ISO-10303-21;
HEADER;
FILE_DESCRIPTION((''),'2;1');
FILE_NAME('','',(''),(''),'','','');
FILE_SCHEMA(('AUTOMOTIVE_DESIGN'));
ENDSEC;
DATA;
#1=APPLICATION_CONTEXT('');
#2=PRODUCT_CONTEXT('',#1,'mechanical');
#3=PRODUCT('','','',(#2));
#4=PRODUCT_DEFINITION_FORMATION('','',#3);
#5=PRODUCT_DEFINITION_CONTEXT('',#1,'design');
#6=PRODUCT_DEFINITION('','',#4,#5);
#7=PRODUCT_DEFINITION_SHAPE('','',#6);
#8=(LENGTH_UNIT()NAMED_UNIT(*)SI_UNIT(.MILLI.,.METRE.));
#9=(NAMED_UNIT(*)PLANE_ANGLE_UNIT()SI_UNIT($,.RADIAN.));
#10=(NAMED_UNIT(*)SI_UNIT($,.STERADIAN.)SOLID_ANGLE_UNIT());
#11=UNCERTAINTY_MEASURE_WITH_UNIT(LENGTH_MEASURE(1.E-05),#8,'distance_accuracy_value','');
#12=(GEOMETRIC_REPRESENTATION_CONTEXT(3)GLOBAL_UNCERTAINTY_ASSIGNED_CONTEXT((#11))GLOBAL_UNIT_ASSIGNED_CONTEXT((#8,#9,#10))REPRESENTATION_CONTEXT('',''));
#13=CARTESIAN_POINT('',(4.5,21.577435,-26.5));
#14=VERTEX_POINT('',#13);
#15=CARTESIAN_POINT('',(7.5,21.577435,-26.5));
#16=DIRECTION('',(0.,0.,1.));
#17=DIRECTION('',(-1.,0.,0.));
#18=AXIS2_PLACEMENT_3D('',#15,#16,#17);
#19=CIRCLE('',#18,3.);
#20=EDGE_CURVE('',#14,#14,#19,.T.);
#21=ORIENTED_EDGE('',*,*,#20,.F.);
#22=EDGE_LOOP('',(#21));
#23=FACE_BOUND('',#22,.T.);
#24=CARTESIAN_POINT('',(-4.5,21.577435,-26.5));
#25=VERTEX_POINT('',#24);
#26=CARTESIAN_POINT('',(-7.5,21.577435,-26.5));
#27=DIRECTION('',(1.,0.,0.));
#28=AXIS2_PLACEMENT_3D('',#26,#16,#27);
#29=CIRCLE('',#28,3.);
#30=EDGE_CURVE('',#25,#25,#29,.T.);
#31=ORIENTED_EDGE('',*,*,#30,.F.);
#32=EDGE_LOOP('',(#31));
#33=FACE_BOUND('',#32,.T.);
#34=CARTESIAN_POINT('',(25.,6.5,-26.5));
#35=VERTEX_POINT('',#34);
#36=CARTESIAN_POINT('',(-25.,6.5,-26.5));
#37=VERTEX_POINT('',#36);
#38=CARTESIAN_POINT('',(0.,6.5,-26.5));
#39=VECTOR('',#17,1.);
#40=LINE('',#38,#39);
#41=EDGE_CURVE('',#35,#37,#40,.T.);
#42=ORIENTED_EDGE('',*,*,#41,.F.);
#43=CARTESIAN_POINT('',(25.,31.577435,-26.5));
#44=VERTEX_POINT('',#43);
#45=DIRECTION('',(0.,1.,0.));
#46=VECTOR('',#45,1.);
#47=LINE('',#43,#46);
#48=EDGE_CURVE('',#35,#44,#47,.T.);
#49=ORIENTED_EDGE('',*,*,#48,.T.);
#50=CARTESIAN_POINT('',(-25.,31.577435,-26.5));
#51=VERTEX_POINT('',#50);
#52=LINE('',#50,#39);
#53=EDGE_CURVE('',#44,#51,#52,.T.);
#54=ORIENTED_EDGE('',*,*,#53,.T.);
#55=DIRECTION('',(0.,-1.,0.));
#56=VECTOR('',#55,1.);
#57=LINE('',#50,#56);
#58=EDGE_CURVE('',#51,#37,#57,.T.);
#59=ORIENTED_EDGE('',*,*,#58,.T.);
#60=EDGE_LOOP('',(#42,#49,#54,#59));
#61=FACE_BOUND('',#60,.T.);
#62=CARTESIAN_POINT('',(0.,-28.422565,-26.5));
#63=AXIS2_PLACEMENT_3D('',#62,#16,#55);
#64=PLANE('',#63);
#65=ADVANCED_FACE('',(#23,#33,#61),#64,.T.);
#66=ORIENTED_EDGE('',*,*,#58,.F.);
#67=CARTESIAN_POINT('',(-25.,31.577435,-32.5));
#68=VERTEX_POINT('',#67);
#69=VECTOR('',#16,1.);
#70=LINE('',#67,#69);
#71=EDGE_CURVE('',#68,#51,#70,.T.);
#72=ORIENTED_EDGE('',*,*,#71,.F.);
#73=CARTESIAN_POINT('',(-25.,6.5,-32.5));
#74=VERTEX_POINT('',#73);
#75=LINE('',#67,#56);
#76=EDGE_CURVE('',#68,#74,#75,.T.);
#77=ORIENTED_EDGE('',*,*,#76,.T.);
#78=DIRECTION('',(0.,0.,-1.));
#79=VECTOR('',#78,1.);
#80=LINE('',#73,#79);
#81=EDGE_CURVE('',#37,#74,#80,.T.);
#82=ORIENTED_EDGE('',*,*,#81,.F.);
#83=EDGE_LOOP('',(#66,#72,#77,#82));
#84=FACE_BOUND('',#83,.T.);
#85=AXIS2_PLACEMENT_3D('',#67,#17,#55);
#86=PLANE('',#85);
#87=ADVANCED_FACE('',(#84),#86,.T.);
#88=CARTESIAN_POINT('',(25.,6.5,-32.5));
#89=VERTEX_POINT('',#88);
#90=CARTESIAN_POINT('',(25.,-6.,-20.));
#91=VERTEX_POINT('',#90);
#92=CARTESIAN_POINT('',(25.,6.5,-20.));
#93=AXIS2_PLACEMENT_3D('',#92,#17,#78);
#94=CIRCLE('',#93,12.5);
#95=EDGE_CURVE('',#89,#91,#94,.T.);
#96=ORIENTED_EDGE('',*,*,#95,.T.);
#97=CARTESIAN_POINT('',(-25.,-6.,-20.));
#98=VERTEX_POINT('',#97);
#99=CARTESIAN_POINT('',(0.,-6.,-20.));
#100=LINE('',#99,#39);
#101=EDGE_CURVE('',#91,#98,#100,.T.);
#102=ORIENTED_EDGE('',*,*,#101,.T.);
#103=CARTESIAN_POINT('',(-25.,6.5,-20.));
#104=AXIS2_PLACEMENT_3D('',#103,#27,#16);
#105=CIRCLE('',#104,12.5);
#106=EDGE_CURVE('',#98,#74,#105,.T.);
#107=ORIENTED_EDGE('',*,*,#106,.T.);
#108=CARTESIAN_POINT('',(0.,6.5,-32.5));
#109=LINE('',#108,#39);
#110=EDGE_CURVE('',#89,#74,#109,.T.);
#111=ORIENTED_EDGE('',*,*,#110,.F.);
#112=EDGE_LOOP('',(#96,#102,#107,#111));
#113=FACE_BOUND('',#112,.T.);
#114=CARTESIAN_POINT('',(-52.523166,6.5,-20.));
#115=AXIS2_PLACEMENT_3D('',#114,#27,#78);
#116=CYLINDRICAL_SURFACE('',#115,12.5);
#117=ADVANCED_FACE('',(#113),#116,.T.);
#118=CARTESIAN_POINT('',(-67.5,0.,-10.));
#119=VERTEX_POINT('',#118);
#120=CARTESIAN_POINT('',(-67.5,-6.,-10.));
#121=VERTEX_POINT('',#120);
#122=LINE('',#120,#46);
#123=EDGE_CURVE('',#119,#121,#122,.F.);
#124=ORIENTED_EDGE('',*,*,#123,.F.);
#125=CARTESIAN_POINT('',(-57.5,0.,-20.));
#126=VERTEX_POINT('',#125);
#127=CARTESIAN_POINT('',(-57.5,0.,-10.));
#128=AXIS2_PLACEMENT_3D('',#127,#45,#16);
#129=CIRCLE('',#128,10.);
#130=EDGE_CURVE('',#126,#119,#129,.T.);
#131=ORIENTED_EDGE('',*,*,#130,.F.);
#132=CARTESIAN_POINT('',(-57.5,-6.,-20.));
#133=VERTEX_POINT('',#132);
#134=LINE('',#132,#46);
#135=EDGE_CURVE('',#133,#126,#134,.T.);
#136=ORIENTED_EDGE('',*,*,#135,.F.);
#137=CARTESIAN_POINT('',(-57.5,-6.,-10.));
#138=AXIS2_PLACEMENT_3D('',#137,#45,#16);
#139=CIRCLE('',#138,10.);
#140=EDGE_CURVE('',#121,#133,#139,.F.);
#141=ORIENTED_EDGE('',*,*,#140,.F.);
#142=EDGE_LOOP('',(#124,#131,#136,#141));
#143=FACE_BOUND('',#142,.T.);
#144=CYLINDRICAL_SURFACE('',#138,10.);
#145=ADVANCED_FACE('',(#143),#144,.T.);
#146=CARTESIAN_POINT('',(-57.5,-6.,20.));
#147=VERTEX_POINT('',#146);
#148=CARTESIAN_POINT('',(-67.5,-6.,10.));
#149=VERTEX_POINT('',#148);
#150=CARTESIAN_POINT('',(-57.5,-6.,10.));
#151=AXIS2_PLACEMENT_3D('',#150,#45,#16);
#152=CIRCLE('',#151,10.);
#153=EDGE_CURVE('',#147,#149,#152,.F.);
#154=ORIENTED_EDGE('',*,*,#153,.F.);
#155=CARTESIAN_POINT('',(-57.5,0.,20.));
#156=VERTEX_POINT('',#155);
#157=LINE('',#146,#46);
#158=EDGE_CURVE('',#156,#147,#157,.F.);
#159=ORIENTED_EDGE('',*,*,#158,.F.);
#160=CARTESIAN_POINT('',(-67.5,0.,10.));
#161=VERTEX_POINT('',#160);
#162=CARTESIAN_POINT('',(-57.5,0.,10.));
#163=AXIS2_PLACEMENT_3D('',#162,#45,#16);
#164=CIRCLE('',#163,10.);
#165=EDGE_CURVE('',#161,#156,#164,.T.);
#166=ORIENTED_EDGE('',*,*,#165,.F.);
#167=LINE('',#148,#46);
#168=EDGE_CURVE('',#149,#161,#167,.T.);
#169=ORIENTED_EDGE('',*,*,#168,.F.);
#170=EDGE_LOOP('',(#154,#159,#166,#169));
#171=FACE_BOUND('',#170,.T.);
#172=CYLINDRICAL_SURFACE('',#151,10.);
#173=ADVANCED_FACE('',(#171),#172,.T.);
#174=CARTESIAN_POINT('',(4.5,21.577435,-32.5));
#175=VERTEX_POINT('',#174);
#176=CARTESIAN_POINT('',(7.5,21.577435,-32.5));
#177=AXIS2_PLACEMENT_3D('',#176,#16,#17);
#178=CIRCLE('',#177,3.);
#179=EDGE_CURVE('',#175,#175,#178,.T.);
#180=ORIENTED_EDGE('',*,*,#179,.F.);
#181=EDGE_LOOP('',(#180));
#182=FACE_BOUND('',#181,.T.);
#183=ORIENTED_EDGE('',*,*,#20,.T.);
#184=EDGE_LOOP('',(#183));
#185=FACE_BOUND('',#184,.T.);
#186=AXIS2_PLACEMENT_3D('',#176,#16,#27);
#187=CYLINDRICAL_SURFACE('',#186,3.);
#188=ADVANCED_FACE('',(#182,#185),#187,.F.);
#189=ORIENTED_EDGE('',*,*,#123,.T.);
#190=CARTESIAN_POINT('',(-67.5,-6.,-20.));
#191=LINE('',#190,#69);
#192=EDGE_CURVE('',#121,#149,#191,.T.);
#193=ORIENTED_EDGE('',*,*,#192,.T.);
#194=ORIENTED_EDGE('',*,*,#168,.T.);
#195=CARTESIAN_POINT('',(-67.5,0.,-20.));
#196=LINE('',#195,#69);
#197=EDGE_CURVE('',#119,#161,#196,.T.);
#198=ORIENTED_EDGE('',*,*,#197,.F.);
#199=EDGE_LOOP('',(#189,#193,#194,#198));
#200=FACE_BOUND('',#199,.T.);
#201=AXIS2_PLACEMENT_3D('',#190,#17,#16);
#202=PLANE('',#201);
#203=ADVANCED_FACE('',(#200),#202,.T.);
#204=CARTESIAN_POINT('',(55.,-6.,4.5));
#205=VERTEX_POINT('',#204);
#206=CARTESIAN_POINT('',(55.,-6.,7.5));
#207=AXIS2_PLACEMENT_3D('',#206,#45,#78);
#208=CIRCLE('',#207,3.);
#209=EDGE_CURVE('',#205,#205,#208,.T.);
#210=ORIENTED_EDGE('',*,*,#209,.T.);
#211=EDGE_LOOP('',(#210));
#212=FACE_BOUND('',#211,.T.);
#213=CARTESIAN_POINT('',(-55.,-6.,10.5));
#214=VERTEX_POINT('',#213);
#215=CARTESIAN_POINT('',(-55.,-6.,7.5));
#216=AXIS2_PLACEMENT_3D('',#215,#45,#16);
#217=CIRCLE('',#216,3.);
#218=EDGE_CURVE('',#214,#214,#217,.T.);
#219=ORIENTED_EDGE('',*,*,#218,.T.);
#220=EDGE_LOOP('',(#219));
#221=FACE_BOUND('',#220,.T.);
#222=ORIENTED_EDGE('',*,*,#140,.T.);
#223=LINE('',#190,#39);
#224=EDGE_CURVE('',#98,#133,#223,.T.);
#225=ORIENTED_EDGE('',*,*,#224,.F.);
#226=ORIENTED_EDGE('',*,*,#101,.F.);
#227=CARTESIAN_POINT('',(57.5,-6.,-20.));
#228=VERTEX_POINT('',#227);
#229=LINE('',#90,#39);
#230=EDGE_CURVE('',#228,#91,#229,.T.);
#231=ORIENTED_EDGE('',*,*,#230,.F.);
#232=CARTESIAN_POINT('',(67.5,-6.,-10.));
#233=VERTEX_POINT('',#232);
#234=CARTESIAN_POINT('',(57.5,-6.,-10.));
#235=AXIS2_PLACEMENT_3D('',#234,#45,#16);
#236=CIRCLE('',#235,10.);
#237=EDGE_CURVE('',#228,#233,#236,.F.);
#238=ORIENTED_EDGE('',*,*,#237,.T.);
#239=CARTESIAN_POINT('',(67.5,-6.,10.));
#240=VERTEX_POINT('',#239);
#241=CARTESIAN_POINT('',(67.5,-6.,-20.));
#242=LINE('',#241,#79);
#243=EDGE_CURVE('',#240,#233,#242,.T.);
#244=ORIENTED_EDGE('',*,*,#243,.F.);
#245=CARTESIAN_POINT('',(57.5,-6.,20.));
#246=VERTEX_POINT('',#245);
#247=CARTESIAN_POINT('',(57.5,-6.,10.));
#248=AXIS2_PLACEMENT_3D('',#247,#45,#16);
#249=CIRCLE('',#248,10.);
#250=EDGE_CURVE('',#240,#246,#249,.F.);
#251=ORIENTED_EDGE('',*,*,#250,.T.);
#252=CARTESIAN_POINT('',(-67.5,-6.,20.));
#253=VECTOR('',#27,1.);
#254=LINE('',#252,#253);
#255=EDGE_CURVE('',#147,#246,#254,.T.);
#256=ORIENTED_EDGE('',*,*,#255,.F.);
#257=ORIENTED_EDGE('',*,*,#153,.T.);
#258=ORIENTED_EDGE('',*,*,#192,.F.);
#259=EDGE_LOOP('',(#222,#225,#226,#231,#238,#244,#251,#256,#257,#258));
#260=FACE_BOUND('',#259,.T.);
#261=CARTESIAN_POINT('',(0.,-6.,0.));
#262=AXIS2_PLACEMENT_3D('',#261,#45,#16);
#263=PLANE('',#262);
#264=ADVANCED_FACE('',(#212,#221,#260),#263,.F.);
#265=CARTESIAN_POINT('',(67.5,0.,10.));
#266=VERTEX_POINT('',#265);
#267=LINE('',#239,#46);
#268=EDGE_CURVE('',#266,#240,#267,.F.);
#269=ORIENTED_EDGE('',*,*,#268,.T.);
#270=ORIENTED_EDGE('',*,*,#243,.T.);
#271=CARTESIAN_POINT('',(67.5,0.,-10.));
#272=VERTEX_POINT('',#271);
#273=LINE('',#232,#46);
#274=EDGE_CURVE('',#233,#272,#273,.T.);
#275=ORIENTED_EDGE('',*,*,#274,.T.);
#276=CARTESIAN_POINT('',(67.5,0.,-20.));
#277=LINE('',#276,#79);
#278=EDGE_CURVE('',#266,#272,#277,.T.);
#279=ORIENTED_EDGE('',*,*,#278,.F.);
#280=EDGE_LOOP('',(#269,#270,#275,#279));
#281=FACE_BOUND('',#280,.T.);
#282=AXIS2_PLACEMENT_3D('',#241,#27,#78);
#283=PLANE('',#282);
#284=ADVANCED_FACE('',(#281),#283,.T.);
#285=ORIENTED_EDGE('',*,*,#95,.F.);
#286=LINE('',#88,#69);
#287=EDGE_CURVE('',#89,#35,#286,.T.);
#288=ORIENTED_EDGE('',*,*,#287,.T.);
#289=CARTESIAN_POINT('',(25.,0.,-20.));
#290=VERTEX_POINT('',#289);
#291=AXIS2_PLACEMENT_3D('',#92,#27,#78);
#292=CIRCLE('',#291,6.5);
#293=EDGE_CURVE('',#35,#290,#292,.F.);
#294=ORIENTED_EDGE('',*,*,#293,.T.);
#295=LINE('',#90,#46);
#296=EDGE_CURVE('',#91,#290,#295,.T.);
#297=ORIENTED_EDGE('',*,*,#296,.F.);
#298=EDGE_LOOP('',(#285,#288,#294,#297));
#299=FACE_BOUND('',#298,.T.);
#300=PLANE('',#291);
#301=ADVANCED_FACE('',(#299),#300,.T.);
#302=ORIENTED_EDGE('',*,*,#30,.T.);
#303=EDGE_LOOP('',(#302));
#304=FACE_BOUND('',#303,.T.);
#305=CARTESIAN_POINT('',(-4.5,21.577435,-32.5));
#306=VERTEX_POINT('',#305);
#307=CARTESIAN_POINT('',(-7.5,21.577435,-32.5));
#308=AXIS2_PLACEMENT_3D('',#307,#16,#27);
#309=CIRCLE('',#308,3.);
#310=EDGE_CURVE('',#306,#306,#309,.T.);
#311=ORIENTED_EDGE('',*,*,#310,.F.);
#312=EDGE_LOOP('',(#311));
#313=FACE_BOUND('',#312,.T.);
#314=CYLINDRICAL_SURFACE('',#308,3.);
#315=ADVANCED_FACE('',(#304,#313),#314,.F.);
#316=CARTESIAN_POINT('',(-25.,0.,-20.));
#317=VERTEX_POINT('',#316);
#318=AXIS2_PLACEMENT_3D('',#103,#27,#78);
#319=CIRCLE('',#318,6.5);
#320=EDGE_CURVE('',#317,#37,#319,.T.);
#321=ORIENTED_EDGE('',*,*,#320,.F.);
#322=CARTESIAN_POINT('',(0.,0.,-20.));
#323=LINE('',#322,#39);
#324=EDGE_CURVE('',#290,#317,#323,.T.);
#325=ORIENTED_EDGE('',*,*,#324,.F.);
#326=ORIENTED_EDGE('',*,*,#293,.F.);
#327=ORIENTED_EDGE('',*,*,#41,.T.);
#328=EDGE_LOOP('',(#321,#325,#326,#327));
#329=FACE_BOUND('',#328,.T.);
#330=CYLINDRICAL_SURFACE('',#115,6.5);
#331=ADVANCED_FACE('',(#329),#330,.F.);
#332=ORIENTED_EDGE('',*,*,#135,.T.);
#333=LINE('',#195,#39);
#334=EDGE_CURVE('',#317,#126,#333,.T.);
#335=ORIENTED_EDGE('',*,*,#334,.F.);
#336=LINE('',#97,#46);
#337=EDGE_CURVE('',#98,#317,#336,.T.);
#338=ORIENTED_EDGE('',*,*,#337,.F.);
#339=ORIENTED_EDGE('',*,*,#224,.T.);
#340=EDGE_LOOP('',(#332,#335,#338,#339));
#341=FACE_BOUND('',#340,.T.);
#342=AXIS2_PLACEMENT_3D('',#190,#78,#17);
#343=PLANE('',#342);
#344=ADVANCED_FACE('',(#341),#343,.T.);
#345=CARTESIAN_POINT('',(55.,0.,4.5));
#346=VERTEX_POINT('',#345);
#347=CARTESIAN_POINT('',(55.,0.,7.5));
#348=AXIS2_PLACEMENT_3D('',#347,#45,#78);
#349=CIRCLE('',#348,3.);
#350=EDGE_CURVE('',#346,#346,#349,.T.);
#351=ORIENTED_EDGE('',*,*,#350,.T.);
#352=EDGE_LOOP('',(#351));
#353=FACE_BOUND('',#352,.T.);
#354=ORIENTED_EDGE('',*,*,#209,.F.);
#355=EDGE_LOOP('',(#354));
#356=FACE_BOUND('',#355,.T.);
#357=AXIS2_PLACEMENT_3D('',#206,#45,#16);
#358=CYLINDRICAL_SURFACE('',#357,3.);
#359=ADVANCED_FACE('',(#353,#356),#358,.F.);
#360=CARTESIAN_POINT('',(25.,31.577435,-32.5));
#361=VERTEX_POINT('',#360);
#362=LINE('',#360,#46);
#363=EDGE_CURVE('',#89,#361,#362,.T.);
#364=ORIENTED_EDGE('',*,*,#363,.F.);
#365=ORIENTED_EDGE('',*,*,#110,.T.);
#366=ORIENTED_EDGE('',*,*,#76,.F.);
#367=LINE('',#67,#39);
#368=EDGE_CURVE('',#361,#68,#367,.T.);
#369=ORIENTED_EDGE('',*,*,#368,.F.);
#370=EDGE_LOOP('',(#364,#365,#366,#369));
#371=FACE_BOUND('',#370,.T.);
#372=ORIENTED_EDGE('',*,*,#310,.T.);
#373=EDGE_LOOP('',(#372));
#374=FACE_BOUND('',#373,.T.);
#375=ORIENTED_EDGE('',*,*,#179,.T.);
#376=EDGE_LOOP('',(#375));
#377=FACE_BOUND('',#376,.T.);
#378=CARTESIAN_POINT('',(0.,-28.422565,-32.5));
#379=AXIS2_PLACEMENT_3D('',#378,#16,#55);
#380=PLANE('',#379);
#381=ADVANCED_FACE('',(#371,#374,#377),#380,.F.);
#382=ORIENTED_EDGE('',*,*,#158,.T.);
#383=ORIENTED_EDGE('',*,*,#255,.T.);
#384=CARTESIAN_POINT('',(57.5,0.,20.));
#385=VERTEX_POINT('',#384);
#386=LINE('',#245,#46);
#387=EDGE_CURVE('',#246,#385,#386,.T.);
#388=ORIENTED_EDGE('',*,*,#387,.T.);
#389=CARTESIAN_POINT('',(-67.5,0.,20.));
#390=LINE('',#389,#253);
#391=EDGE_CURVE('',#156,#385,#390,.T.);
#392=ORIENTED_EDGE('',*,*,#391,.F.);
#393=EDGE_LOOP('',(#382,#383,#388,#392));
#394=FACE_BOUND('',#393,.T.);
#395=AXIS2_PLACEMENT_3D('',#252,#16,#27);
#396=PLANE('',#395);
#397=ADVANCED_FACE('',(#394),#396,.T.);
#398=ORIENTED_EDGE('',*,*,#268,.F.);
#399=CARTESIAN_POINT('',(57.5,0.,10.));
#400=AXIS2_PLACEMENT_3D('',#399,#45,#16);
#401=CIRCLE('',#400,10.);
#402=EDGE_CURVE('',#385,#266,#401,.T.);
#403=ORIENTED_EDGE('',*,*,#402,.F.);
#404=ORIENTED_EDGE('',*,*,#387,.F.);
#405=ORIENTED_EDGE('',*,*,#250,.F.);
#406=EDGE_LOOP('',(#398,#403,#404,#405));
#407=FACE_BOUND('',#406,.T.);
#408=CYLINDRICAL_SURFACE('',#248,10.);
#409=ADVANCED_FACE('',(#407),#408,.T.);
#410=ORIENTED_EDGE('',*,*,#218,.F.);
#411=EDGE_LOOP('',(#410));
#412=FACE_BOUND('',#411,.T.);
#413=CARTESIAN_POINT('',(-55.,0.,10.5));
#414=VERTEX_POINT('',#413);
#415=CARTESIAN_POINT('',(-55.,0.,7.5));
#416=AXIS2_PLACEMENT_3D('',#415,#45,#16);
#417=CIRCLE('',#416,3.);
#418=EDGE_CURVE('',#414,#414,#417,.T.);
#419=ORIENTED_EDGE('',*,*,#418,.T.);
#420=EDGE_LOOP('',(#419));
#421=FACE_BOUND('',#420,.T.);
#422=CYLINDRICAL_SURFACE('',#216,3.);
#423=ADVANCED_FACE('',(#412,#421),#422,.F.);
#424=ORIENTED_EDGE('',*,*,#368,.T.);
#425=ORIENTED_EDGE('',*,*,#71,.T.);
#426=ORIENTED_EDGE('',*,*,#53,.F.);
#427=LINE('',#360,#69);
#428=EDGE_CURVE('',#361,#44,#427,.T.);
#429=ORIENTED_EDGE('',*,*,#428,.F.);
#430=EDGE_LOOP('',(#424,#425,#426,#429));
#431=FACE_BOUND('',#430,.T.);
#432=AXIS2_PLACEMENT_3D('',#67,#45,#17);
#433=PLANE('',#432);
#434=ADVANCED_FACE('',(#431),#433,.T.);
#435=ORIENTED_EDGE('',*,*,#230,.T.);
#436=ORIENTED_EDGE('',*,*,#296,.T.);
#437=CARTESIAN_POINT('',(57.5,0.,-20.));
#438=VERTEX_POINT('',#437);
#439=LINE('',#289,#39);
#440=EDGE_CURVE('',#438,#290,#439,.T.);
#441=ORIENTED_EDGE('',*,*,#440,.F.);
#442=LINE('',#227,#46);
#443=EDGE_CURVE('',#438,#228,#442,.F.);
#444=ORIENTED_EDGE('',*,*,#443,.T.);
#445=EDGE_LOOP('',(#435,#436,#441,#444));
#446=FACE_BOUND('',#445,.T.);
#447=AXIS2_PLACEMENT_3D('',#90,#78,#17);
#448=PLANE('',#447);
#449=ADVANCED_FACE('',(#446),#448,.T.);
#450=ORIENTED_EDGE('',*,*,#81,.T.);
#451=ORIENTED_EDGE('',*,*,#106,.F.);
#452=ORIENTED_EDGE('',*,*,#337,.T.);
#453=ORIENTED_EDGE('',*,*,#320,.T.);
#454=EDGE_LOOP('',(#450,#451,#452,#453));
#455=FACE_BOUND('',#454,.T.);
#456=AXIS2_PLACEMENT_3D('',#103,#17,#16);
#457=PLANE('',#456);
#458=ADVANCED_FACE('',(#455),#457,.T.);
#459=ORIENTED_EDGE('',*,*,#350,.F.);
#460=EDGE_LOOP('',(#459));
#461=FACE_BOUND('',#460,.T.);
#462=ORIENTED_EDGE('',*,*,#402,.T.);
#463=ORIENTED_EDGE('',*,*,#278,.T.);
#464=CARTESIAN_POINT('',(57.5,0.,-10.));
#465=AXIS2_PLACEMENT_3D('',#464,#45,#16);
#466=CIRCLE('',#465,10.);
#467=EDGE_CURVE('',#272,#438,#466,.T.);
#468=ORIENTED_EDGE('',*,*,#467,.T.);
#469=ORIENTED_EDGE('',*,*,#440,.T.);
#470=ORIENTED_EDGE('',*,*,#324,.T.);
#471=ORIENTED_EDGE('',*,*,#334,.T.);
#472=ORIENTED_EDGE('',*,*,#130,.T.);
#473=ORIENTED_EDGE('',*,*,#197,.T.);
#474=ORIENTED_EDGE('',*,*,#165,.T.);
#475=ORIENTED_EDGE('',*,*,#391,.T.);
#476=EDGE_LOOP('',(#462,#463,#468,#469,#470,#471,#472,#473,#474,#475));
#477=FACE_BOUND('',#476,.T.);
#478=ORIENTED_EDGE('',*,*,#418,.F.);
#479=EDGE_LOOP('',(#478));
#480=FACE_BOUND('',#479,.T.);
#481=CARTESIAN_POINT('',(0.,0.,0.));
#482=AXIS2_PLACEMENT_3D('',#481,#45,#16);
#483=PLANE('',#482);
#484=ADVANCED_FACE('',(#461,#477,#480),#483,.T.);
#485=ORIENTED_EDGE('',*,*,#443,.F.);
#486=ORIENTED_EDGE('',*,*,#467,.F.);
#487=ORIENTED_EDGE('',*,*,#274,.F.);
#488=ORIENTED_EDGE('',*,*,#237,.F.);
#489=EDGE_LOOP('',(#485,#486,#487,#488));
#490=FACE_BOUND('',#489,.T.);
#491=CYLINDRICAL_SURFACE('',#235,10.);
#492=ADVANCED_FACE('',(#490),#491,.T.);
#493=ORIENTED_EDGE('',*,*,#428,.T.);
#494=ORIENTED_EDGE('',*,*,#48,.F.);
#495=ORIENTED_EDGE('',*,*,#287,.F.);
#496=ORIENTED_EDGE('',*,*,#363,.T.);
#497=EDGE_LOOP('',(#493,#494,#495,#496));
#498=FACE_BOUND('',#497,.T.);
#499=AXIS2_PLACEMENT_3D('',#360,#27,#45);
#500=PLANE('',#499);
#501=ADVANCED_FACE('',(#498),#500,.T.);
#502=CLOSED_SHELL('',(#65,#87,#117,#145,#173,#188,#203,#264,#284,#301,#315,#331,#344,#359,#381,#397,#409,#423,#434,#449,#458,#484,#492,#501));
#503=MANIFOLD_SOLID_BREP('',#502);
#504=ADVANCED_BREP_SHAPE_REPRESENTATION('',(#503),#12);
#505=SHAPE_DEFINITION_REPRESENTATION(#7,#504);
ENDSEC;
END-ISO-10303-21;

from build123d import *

# Parameters (mm, degrees)
BASE_FLANGE1_DEPTH     = 6
SKETCHED_START         = -25
SKETCHED_BEND1_DEPTH   = 50
SKETCHED_BEND1_2_DEPTH = 50
SKETCH8_R              = 3
CUT_EXTRUDE1_DEPTH     = 82.299658022
SKETCH9_R              = 3
CUT_EXTRUDE2_DEPTH     = 88.83868393
FILLET1_R              = 10


# Read off the part's stored shape, not the designer's step: Sketched Bend1
# Sheet-metal steps are written as plain solids
with BuildPart() as part:
    # Sketch1 → Base-Flange1 (new body)
    with BuildSketch(Plane(origin=(0, 0, 0), x_dir=(1, 0, 0), z_dir=(0, 1, 0))):
        Polygon((25, 20), (67.5, 20), (67.5, -20), (-67.5, -20), (-67.5, 20), (-25, 20), (-25, 60), (25, 60), align=None)
    extrude(amount=-BASE_FLANGE1_DEPTH)

    # Sketched Bend1 outline → Sketched Bend1 (cut)
    with BuildSketch(Plane.YZ.offset(SKETCHED_START)):
        with BuildLine():
            Line((0, -60), (0, -30.677078252))
            ThreePointArc((0, -30.677078252), (-4.397247359, -26.123724357), (-6, -20))
            Line((-6, -20), (-6, -60))
            Line((-6, -60), (0, -60))
        make_face()
    extrude(amount=SKETCHED_BEND1_DEPTH, mode=Mode.SUBTRACT)

    # Sketched Bend1 2 outline → Sketched Bend1 2 (add)
    with BuildSketch(Plane.YZ.offset(SKETCHED_START)):
        with BuildLine():
            Line((6.5, -32.5), (31.577434895, -32.5))
            Line((31.577434895, -32.5), (31.577434895, -26.5))
            Line((31.577434895, -26.5), (6.5, -26.5))
            ThreePointArc((6.5, -26.5), (1.903805922, -24.596194078), (0, -20))
            Line((0, -20), (0, -30.677078252))
            ThreePointArc((0, -30.677078252), (3.124609515, -32.035644523), (6.5, -32.5))
        make_face()
    extrude(amount=SKETCHED_BEND1_2_DEPTH)

    # Sketch8 → Cut-Extrude1 (cut, through all)
    with BuildSketch(Plane(origin=(0, 0, 0), x_dir=(1, 0, 0), z_dir=(0, 1, 0))):
        with Locations(Location((-55, -7.5, 0), (0, 0, 270))):
            Circle(SKETCH8_R)
        with Locations(Location((55, -7.5, 0), (0, 0, 90))):
            Circle(SKETCH8_R)
    extrude(amount=-CUT_EXTRUDE1_DEPTH, mode=Mode.SUBTRACT)

    # Sketch9 → Cut-Extrude2 (cut, through all)
    with BuildSketch(Plane.XY.offset(-26.5)):
        with Locations((-7.5, 21.577434895)):
            Circle(SKETCH9_R)
        with Locations(Location((7.5, 21.577434895, 0), (0, 0, 180))):
            Circle(SKETCH9_R)
    extrude(amount=-CUT_EXTRUDE2_DEPTH, mode=Mode.SUBTRACT)

    # Fillet1
    fillet1_edges = [part.edges().sort_by_distance(p)[0] for p in [
        (-67.5, -3, 20),
        (67.5, -3, 20),
        (67.5, -3, -20),
        (-67.5, -3, -20),
    ]]
    fillet(fillet1_edges, radius=FILLET1_R)


solid = part.part
